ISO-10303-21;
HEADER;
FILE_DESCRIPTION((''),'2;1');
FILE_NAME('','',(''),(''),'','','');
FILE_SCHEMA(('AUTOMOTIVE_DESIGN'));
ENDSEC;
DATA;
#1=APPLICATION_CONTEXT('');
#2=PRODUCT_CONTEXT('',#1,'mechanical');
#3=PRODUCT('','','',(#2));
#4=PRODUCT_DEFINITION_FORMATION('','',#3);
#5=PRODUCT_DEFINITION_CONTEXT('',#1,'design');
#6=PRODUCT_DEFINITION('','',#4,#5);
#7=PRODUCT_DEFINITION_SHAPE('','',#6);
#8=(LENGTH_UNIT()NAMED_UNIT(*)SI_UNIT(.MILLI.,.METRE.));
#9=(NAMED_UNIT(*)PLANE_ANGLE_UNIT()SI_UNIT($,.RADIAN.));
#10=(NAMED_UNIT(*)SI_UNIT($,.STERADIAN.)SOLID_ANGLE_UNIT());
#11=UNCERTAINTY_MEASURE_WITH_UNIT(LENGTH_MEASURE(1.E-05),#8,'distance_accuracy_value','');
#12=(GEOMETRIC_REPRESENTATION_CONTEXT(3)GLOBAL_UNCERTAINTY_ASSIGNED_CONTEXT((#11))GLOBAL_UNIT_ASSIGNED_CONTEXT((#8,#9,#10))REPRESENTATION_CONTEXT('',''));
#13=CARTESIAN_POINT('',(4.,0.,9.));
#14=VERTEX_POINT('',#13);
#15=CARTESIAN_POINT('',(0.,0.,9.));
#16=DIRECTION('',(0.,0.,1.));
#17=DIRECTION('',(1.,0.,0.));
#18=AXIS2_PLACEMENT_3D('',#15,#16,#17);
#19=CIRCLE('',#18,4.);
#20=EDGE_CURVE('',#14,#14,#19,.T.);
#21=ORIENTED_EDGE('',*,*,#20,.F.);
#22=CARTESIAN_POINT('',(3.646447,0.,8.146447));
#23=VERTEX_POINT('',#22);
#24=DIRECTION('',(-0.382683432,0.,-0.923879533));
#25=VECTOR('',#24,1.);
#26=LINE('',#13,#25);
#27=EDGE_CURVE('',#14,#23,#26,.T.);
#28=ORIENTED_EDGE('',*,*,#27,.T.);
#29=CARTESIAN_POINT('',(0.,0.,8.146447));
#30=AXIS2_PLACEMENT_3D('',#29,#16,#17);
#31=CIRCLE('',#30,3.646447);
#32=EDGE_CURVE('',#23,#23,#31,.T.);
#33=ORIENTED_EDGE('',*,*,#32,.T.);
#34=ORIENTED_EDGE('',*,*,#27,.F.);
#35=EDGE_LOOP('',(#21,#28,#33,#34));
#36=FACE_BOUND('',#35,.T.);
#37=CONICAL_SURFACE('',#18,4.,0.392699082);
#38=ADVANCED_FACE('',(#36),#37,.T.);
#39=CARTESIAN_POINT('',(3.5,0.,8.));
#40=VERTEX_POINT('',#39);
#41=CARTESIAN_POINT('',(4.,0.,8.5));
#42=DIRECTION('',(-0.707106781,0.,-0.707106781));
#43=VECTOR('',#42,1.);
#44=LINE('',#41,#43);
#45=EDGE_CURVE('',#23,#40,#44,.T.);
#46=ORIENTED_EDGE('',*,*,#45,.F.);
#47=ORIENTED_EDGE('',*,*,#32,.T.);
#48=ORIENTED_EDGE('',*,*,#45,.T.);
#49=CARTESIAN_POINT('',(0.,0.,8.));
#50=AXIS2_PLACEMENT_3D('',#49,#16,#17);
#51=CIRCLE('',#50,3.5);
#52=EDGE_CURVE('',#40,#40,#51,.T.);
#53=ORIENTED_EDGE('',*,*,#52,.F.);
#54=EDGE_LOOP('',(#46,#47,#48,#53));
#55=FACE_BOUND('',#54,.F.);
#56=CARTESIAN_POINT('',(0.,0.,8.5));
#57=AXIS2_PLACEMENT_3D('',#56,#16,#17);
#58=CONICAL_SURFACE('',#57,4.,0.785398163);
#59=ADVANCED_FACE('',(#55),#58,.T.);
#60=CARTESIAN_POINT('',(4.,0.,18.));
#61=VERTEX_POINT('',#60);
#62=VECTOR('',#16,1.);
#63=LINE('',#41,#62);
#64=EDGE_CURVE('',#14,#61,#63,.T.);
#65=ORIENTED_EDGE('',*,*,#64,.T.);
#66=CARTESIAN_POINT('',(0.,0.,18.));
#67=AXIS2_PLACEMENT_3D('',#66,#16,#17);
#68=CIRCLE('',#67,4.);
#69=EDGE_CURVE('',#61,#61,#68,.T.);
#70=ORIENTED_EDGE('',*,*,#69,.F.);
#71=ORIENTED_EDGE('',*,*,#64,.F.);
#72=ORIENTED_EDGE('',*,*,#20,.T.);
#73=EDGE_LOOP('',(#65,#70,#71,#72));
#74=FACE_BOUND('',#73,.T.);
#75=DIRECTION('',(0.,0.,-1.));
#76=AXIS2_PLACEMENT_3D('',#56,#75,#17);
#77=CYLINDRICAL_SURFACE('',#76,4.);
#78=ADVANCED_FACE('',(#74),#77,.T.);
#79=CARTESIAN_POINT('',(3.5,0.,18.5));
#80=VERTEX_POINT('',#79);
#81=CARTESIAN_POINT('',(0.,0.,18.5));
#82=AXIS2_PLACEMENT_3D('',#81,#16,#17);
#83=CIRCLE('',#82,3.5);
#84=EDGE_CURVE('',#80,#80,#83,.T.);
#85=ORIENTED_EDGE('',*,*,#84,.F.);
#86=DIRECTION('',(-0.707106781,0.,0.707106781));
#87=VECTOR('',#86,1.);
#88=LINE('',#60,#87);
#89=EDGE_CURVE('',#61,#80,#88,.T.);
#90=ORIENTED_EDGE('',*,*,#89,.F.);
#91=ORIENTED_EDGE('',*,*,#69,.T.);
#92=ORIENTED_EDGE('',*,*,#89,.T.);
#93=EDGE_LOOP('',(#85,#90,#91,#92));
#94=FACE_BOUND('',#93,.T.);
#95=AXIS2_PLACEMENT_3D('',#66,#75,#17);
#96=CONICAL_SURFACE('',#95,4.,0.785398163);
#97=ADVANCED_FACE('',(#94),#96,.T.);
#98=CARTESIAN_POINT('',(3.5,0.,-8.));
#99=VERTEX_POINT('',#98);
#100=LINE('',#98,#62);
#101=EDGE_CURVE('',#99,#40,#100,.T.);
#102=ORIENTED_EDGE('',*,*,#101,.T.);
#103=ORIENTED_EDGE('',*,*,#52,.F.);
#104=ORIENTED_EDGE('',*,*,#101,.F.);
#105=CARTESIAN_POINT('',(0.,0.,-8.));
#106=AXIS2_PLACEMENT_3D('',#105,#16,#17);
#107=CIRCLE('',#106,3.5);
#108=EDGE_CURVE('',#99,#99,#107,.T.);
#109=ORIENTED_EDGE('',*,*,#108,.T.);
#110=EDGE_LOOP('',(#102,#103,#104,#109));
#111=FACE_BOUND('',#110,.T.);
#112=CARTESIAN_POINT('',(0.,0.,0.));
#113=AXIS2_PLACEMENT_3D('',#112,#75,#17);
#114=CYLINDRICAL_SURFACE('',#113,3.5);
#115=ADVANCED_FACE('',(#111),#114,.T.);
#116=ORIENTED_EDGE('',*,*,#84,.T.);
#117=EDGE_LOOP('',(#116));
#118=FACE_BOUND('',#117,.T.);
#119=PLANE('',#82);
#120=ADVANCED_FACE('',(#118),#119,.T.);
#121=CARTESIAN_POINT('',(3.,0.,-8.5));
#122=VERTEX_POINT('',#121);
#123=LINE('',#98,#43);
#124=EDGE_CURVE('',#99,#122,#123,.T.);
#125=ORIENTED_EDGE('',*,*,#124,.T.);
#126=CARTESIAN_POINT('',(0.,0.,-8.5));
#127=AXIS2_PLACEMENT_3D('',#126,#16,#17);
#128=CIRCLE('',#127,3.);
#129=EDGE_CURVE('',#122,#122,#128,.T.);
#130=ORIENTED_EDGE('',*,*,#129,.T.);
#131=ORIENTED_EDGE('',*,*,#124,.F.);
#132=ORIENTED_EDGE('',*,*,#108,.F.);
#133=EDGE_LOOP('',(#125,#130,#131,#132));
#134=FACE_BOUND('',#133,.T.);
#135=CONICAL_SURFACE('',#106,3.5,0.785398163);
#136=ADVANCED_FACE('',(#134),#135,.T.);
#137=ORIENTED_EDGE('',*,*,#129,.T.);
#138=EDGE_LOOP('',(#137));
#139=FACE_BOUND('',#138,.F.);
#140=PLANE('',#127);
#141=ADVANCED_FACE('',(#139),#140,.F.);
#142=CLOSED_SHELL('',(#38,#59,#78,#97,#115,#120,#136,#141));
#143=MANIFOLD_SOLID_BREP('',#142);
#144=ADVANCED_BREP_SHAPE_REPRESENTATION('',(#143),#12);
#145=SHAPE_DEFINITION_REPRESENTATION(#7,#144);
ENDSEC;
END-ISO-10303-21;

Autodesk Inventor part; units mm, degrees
ref_plane "YZ Plane" through (0, 0, 0) normal (1, 0, 0) x (0, 1, 0)
ref_plane "XZ Plane" through (0, 0, 0) normal (0, 1, 0) x (-1, 0, 0)
ref_plane "XY Plane" through (0, 0, 0) normal (0, 0, 1) x (1, 0, 0)
sketch "Sketch1" plane through (0, 0, 0) normal (0, 0, 1) x (1, 0, 0)
  circle A0 centre (0, 0) radius 3.5
  dimension "d0" = 7
extrude "Extrusion1" add sketch "Sketch1" along normal mid plane 17
sketch "Sketch2" plane through (0, 0, 8.5) normal (0, 0, 1) x (1, 0, 0)
  circle A0 centre (0, 0) radius 3.5 projected
  circle A1 centre (0, 0) radius 4
  dimension "d3" = 8
extrude "Extrusion2" add sketch "Sketch2" along normal blind 10 contours A0 | A1
chamfer "Chamfer1" distance 0.5 angle 45 4 edges at (-3.5, 0, -8.5) (-3.5, 0, 8.5) (-4, 0, 8.5) (-4, 0, 18.5)
properties part number "as gearbox" material "Stainless Steel"
